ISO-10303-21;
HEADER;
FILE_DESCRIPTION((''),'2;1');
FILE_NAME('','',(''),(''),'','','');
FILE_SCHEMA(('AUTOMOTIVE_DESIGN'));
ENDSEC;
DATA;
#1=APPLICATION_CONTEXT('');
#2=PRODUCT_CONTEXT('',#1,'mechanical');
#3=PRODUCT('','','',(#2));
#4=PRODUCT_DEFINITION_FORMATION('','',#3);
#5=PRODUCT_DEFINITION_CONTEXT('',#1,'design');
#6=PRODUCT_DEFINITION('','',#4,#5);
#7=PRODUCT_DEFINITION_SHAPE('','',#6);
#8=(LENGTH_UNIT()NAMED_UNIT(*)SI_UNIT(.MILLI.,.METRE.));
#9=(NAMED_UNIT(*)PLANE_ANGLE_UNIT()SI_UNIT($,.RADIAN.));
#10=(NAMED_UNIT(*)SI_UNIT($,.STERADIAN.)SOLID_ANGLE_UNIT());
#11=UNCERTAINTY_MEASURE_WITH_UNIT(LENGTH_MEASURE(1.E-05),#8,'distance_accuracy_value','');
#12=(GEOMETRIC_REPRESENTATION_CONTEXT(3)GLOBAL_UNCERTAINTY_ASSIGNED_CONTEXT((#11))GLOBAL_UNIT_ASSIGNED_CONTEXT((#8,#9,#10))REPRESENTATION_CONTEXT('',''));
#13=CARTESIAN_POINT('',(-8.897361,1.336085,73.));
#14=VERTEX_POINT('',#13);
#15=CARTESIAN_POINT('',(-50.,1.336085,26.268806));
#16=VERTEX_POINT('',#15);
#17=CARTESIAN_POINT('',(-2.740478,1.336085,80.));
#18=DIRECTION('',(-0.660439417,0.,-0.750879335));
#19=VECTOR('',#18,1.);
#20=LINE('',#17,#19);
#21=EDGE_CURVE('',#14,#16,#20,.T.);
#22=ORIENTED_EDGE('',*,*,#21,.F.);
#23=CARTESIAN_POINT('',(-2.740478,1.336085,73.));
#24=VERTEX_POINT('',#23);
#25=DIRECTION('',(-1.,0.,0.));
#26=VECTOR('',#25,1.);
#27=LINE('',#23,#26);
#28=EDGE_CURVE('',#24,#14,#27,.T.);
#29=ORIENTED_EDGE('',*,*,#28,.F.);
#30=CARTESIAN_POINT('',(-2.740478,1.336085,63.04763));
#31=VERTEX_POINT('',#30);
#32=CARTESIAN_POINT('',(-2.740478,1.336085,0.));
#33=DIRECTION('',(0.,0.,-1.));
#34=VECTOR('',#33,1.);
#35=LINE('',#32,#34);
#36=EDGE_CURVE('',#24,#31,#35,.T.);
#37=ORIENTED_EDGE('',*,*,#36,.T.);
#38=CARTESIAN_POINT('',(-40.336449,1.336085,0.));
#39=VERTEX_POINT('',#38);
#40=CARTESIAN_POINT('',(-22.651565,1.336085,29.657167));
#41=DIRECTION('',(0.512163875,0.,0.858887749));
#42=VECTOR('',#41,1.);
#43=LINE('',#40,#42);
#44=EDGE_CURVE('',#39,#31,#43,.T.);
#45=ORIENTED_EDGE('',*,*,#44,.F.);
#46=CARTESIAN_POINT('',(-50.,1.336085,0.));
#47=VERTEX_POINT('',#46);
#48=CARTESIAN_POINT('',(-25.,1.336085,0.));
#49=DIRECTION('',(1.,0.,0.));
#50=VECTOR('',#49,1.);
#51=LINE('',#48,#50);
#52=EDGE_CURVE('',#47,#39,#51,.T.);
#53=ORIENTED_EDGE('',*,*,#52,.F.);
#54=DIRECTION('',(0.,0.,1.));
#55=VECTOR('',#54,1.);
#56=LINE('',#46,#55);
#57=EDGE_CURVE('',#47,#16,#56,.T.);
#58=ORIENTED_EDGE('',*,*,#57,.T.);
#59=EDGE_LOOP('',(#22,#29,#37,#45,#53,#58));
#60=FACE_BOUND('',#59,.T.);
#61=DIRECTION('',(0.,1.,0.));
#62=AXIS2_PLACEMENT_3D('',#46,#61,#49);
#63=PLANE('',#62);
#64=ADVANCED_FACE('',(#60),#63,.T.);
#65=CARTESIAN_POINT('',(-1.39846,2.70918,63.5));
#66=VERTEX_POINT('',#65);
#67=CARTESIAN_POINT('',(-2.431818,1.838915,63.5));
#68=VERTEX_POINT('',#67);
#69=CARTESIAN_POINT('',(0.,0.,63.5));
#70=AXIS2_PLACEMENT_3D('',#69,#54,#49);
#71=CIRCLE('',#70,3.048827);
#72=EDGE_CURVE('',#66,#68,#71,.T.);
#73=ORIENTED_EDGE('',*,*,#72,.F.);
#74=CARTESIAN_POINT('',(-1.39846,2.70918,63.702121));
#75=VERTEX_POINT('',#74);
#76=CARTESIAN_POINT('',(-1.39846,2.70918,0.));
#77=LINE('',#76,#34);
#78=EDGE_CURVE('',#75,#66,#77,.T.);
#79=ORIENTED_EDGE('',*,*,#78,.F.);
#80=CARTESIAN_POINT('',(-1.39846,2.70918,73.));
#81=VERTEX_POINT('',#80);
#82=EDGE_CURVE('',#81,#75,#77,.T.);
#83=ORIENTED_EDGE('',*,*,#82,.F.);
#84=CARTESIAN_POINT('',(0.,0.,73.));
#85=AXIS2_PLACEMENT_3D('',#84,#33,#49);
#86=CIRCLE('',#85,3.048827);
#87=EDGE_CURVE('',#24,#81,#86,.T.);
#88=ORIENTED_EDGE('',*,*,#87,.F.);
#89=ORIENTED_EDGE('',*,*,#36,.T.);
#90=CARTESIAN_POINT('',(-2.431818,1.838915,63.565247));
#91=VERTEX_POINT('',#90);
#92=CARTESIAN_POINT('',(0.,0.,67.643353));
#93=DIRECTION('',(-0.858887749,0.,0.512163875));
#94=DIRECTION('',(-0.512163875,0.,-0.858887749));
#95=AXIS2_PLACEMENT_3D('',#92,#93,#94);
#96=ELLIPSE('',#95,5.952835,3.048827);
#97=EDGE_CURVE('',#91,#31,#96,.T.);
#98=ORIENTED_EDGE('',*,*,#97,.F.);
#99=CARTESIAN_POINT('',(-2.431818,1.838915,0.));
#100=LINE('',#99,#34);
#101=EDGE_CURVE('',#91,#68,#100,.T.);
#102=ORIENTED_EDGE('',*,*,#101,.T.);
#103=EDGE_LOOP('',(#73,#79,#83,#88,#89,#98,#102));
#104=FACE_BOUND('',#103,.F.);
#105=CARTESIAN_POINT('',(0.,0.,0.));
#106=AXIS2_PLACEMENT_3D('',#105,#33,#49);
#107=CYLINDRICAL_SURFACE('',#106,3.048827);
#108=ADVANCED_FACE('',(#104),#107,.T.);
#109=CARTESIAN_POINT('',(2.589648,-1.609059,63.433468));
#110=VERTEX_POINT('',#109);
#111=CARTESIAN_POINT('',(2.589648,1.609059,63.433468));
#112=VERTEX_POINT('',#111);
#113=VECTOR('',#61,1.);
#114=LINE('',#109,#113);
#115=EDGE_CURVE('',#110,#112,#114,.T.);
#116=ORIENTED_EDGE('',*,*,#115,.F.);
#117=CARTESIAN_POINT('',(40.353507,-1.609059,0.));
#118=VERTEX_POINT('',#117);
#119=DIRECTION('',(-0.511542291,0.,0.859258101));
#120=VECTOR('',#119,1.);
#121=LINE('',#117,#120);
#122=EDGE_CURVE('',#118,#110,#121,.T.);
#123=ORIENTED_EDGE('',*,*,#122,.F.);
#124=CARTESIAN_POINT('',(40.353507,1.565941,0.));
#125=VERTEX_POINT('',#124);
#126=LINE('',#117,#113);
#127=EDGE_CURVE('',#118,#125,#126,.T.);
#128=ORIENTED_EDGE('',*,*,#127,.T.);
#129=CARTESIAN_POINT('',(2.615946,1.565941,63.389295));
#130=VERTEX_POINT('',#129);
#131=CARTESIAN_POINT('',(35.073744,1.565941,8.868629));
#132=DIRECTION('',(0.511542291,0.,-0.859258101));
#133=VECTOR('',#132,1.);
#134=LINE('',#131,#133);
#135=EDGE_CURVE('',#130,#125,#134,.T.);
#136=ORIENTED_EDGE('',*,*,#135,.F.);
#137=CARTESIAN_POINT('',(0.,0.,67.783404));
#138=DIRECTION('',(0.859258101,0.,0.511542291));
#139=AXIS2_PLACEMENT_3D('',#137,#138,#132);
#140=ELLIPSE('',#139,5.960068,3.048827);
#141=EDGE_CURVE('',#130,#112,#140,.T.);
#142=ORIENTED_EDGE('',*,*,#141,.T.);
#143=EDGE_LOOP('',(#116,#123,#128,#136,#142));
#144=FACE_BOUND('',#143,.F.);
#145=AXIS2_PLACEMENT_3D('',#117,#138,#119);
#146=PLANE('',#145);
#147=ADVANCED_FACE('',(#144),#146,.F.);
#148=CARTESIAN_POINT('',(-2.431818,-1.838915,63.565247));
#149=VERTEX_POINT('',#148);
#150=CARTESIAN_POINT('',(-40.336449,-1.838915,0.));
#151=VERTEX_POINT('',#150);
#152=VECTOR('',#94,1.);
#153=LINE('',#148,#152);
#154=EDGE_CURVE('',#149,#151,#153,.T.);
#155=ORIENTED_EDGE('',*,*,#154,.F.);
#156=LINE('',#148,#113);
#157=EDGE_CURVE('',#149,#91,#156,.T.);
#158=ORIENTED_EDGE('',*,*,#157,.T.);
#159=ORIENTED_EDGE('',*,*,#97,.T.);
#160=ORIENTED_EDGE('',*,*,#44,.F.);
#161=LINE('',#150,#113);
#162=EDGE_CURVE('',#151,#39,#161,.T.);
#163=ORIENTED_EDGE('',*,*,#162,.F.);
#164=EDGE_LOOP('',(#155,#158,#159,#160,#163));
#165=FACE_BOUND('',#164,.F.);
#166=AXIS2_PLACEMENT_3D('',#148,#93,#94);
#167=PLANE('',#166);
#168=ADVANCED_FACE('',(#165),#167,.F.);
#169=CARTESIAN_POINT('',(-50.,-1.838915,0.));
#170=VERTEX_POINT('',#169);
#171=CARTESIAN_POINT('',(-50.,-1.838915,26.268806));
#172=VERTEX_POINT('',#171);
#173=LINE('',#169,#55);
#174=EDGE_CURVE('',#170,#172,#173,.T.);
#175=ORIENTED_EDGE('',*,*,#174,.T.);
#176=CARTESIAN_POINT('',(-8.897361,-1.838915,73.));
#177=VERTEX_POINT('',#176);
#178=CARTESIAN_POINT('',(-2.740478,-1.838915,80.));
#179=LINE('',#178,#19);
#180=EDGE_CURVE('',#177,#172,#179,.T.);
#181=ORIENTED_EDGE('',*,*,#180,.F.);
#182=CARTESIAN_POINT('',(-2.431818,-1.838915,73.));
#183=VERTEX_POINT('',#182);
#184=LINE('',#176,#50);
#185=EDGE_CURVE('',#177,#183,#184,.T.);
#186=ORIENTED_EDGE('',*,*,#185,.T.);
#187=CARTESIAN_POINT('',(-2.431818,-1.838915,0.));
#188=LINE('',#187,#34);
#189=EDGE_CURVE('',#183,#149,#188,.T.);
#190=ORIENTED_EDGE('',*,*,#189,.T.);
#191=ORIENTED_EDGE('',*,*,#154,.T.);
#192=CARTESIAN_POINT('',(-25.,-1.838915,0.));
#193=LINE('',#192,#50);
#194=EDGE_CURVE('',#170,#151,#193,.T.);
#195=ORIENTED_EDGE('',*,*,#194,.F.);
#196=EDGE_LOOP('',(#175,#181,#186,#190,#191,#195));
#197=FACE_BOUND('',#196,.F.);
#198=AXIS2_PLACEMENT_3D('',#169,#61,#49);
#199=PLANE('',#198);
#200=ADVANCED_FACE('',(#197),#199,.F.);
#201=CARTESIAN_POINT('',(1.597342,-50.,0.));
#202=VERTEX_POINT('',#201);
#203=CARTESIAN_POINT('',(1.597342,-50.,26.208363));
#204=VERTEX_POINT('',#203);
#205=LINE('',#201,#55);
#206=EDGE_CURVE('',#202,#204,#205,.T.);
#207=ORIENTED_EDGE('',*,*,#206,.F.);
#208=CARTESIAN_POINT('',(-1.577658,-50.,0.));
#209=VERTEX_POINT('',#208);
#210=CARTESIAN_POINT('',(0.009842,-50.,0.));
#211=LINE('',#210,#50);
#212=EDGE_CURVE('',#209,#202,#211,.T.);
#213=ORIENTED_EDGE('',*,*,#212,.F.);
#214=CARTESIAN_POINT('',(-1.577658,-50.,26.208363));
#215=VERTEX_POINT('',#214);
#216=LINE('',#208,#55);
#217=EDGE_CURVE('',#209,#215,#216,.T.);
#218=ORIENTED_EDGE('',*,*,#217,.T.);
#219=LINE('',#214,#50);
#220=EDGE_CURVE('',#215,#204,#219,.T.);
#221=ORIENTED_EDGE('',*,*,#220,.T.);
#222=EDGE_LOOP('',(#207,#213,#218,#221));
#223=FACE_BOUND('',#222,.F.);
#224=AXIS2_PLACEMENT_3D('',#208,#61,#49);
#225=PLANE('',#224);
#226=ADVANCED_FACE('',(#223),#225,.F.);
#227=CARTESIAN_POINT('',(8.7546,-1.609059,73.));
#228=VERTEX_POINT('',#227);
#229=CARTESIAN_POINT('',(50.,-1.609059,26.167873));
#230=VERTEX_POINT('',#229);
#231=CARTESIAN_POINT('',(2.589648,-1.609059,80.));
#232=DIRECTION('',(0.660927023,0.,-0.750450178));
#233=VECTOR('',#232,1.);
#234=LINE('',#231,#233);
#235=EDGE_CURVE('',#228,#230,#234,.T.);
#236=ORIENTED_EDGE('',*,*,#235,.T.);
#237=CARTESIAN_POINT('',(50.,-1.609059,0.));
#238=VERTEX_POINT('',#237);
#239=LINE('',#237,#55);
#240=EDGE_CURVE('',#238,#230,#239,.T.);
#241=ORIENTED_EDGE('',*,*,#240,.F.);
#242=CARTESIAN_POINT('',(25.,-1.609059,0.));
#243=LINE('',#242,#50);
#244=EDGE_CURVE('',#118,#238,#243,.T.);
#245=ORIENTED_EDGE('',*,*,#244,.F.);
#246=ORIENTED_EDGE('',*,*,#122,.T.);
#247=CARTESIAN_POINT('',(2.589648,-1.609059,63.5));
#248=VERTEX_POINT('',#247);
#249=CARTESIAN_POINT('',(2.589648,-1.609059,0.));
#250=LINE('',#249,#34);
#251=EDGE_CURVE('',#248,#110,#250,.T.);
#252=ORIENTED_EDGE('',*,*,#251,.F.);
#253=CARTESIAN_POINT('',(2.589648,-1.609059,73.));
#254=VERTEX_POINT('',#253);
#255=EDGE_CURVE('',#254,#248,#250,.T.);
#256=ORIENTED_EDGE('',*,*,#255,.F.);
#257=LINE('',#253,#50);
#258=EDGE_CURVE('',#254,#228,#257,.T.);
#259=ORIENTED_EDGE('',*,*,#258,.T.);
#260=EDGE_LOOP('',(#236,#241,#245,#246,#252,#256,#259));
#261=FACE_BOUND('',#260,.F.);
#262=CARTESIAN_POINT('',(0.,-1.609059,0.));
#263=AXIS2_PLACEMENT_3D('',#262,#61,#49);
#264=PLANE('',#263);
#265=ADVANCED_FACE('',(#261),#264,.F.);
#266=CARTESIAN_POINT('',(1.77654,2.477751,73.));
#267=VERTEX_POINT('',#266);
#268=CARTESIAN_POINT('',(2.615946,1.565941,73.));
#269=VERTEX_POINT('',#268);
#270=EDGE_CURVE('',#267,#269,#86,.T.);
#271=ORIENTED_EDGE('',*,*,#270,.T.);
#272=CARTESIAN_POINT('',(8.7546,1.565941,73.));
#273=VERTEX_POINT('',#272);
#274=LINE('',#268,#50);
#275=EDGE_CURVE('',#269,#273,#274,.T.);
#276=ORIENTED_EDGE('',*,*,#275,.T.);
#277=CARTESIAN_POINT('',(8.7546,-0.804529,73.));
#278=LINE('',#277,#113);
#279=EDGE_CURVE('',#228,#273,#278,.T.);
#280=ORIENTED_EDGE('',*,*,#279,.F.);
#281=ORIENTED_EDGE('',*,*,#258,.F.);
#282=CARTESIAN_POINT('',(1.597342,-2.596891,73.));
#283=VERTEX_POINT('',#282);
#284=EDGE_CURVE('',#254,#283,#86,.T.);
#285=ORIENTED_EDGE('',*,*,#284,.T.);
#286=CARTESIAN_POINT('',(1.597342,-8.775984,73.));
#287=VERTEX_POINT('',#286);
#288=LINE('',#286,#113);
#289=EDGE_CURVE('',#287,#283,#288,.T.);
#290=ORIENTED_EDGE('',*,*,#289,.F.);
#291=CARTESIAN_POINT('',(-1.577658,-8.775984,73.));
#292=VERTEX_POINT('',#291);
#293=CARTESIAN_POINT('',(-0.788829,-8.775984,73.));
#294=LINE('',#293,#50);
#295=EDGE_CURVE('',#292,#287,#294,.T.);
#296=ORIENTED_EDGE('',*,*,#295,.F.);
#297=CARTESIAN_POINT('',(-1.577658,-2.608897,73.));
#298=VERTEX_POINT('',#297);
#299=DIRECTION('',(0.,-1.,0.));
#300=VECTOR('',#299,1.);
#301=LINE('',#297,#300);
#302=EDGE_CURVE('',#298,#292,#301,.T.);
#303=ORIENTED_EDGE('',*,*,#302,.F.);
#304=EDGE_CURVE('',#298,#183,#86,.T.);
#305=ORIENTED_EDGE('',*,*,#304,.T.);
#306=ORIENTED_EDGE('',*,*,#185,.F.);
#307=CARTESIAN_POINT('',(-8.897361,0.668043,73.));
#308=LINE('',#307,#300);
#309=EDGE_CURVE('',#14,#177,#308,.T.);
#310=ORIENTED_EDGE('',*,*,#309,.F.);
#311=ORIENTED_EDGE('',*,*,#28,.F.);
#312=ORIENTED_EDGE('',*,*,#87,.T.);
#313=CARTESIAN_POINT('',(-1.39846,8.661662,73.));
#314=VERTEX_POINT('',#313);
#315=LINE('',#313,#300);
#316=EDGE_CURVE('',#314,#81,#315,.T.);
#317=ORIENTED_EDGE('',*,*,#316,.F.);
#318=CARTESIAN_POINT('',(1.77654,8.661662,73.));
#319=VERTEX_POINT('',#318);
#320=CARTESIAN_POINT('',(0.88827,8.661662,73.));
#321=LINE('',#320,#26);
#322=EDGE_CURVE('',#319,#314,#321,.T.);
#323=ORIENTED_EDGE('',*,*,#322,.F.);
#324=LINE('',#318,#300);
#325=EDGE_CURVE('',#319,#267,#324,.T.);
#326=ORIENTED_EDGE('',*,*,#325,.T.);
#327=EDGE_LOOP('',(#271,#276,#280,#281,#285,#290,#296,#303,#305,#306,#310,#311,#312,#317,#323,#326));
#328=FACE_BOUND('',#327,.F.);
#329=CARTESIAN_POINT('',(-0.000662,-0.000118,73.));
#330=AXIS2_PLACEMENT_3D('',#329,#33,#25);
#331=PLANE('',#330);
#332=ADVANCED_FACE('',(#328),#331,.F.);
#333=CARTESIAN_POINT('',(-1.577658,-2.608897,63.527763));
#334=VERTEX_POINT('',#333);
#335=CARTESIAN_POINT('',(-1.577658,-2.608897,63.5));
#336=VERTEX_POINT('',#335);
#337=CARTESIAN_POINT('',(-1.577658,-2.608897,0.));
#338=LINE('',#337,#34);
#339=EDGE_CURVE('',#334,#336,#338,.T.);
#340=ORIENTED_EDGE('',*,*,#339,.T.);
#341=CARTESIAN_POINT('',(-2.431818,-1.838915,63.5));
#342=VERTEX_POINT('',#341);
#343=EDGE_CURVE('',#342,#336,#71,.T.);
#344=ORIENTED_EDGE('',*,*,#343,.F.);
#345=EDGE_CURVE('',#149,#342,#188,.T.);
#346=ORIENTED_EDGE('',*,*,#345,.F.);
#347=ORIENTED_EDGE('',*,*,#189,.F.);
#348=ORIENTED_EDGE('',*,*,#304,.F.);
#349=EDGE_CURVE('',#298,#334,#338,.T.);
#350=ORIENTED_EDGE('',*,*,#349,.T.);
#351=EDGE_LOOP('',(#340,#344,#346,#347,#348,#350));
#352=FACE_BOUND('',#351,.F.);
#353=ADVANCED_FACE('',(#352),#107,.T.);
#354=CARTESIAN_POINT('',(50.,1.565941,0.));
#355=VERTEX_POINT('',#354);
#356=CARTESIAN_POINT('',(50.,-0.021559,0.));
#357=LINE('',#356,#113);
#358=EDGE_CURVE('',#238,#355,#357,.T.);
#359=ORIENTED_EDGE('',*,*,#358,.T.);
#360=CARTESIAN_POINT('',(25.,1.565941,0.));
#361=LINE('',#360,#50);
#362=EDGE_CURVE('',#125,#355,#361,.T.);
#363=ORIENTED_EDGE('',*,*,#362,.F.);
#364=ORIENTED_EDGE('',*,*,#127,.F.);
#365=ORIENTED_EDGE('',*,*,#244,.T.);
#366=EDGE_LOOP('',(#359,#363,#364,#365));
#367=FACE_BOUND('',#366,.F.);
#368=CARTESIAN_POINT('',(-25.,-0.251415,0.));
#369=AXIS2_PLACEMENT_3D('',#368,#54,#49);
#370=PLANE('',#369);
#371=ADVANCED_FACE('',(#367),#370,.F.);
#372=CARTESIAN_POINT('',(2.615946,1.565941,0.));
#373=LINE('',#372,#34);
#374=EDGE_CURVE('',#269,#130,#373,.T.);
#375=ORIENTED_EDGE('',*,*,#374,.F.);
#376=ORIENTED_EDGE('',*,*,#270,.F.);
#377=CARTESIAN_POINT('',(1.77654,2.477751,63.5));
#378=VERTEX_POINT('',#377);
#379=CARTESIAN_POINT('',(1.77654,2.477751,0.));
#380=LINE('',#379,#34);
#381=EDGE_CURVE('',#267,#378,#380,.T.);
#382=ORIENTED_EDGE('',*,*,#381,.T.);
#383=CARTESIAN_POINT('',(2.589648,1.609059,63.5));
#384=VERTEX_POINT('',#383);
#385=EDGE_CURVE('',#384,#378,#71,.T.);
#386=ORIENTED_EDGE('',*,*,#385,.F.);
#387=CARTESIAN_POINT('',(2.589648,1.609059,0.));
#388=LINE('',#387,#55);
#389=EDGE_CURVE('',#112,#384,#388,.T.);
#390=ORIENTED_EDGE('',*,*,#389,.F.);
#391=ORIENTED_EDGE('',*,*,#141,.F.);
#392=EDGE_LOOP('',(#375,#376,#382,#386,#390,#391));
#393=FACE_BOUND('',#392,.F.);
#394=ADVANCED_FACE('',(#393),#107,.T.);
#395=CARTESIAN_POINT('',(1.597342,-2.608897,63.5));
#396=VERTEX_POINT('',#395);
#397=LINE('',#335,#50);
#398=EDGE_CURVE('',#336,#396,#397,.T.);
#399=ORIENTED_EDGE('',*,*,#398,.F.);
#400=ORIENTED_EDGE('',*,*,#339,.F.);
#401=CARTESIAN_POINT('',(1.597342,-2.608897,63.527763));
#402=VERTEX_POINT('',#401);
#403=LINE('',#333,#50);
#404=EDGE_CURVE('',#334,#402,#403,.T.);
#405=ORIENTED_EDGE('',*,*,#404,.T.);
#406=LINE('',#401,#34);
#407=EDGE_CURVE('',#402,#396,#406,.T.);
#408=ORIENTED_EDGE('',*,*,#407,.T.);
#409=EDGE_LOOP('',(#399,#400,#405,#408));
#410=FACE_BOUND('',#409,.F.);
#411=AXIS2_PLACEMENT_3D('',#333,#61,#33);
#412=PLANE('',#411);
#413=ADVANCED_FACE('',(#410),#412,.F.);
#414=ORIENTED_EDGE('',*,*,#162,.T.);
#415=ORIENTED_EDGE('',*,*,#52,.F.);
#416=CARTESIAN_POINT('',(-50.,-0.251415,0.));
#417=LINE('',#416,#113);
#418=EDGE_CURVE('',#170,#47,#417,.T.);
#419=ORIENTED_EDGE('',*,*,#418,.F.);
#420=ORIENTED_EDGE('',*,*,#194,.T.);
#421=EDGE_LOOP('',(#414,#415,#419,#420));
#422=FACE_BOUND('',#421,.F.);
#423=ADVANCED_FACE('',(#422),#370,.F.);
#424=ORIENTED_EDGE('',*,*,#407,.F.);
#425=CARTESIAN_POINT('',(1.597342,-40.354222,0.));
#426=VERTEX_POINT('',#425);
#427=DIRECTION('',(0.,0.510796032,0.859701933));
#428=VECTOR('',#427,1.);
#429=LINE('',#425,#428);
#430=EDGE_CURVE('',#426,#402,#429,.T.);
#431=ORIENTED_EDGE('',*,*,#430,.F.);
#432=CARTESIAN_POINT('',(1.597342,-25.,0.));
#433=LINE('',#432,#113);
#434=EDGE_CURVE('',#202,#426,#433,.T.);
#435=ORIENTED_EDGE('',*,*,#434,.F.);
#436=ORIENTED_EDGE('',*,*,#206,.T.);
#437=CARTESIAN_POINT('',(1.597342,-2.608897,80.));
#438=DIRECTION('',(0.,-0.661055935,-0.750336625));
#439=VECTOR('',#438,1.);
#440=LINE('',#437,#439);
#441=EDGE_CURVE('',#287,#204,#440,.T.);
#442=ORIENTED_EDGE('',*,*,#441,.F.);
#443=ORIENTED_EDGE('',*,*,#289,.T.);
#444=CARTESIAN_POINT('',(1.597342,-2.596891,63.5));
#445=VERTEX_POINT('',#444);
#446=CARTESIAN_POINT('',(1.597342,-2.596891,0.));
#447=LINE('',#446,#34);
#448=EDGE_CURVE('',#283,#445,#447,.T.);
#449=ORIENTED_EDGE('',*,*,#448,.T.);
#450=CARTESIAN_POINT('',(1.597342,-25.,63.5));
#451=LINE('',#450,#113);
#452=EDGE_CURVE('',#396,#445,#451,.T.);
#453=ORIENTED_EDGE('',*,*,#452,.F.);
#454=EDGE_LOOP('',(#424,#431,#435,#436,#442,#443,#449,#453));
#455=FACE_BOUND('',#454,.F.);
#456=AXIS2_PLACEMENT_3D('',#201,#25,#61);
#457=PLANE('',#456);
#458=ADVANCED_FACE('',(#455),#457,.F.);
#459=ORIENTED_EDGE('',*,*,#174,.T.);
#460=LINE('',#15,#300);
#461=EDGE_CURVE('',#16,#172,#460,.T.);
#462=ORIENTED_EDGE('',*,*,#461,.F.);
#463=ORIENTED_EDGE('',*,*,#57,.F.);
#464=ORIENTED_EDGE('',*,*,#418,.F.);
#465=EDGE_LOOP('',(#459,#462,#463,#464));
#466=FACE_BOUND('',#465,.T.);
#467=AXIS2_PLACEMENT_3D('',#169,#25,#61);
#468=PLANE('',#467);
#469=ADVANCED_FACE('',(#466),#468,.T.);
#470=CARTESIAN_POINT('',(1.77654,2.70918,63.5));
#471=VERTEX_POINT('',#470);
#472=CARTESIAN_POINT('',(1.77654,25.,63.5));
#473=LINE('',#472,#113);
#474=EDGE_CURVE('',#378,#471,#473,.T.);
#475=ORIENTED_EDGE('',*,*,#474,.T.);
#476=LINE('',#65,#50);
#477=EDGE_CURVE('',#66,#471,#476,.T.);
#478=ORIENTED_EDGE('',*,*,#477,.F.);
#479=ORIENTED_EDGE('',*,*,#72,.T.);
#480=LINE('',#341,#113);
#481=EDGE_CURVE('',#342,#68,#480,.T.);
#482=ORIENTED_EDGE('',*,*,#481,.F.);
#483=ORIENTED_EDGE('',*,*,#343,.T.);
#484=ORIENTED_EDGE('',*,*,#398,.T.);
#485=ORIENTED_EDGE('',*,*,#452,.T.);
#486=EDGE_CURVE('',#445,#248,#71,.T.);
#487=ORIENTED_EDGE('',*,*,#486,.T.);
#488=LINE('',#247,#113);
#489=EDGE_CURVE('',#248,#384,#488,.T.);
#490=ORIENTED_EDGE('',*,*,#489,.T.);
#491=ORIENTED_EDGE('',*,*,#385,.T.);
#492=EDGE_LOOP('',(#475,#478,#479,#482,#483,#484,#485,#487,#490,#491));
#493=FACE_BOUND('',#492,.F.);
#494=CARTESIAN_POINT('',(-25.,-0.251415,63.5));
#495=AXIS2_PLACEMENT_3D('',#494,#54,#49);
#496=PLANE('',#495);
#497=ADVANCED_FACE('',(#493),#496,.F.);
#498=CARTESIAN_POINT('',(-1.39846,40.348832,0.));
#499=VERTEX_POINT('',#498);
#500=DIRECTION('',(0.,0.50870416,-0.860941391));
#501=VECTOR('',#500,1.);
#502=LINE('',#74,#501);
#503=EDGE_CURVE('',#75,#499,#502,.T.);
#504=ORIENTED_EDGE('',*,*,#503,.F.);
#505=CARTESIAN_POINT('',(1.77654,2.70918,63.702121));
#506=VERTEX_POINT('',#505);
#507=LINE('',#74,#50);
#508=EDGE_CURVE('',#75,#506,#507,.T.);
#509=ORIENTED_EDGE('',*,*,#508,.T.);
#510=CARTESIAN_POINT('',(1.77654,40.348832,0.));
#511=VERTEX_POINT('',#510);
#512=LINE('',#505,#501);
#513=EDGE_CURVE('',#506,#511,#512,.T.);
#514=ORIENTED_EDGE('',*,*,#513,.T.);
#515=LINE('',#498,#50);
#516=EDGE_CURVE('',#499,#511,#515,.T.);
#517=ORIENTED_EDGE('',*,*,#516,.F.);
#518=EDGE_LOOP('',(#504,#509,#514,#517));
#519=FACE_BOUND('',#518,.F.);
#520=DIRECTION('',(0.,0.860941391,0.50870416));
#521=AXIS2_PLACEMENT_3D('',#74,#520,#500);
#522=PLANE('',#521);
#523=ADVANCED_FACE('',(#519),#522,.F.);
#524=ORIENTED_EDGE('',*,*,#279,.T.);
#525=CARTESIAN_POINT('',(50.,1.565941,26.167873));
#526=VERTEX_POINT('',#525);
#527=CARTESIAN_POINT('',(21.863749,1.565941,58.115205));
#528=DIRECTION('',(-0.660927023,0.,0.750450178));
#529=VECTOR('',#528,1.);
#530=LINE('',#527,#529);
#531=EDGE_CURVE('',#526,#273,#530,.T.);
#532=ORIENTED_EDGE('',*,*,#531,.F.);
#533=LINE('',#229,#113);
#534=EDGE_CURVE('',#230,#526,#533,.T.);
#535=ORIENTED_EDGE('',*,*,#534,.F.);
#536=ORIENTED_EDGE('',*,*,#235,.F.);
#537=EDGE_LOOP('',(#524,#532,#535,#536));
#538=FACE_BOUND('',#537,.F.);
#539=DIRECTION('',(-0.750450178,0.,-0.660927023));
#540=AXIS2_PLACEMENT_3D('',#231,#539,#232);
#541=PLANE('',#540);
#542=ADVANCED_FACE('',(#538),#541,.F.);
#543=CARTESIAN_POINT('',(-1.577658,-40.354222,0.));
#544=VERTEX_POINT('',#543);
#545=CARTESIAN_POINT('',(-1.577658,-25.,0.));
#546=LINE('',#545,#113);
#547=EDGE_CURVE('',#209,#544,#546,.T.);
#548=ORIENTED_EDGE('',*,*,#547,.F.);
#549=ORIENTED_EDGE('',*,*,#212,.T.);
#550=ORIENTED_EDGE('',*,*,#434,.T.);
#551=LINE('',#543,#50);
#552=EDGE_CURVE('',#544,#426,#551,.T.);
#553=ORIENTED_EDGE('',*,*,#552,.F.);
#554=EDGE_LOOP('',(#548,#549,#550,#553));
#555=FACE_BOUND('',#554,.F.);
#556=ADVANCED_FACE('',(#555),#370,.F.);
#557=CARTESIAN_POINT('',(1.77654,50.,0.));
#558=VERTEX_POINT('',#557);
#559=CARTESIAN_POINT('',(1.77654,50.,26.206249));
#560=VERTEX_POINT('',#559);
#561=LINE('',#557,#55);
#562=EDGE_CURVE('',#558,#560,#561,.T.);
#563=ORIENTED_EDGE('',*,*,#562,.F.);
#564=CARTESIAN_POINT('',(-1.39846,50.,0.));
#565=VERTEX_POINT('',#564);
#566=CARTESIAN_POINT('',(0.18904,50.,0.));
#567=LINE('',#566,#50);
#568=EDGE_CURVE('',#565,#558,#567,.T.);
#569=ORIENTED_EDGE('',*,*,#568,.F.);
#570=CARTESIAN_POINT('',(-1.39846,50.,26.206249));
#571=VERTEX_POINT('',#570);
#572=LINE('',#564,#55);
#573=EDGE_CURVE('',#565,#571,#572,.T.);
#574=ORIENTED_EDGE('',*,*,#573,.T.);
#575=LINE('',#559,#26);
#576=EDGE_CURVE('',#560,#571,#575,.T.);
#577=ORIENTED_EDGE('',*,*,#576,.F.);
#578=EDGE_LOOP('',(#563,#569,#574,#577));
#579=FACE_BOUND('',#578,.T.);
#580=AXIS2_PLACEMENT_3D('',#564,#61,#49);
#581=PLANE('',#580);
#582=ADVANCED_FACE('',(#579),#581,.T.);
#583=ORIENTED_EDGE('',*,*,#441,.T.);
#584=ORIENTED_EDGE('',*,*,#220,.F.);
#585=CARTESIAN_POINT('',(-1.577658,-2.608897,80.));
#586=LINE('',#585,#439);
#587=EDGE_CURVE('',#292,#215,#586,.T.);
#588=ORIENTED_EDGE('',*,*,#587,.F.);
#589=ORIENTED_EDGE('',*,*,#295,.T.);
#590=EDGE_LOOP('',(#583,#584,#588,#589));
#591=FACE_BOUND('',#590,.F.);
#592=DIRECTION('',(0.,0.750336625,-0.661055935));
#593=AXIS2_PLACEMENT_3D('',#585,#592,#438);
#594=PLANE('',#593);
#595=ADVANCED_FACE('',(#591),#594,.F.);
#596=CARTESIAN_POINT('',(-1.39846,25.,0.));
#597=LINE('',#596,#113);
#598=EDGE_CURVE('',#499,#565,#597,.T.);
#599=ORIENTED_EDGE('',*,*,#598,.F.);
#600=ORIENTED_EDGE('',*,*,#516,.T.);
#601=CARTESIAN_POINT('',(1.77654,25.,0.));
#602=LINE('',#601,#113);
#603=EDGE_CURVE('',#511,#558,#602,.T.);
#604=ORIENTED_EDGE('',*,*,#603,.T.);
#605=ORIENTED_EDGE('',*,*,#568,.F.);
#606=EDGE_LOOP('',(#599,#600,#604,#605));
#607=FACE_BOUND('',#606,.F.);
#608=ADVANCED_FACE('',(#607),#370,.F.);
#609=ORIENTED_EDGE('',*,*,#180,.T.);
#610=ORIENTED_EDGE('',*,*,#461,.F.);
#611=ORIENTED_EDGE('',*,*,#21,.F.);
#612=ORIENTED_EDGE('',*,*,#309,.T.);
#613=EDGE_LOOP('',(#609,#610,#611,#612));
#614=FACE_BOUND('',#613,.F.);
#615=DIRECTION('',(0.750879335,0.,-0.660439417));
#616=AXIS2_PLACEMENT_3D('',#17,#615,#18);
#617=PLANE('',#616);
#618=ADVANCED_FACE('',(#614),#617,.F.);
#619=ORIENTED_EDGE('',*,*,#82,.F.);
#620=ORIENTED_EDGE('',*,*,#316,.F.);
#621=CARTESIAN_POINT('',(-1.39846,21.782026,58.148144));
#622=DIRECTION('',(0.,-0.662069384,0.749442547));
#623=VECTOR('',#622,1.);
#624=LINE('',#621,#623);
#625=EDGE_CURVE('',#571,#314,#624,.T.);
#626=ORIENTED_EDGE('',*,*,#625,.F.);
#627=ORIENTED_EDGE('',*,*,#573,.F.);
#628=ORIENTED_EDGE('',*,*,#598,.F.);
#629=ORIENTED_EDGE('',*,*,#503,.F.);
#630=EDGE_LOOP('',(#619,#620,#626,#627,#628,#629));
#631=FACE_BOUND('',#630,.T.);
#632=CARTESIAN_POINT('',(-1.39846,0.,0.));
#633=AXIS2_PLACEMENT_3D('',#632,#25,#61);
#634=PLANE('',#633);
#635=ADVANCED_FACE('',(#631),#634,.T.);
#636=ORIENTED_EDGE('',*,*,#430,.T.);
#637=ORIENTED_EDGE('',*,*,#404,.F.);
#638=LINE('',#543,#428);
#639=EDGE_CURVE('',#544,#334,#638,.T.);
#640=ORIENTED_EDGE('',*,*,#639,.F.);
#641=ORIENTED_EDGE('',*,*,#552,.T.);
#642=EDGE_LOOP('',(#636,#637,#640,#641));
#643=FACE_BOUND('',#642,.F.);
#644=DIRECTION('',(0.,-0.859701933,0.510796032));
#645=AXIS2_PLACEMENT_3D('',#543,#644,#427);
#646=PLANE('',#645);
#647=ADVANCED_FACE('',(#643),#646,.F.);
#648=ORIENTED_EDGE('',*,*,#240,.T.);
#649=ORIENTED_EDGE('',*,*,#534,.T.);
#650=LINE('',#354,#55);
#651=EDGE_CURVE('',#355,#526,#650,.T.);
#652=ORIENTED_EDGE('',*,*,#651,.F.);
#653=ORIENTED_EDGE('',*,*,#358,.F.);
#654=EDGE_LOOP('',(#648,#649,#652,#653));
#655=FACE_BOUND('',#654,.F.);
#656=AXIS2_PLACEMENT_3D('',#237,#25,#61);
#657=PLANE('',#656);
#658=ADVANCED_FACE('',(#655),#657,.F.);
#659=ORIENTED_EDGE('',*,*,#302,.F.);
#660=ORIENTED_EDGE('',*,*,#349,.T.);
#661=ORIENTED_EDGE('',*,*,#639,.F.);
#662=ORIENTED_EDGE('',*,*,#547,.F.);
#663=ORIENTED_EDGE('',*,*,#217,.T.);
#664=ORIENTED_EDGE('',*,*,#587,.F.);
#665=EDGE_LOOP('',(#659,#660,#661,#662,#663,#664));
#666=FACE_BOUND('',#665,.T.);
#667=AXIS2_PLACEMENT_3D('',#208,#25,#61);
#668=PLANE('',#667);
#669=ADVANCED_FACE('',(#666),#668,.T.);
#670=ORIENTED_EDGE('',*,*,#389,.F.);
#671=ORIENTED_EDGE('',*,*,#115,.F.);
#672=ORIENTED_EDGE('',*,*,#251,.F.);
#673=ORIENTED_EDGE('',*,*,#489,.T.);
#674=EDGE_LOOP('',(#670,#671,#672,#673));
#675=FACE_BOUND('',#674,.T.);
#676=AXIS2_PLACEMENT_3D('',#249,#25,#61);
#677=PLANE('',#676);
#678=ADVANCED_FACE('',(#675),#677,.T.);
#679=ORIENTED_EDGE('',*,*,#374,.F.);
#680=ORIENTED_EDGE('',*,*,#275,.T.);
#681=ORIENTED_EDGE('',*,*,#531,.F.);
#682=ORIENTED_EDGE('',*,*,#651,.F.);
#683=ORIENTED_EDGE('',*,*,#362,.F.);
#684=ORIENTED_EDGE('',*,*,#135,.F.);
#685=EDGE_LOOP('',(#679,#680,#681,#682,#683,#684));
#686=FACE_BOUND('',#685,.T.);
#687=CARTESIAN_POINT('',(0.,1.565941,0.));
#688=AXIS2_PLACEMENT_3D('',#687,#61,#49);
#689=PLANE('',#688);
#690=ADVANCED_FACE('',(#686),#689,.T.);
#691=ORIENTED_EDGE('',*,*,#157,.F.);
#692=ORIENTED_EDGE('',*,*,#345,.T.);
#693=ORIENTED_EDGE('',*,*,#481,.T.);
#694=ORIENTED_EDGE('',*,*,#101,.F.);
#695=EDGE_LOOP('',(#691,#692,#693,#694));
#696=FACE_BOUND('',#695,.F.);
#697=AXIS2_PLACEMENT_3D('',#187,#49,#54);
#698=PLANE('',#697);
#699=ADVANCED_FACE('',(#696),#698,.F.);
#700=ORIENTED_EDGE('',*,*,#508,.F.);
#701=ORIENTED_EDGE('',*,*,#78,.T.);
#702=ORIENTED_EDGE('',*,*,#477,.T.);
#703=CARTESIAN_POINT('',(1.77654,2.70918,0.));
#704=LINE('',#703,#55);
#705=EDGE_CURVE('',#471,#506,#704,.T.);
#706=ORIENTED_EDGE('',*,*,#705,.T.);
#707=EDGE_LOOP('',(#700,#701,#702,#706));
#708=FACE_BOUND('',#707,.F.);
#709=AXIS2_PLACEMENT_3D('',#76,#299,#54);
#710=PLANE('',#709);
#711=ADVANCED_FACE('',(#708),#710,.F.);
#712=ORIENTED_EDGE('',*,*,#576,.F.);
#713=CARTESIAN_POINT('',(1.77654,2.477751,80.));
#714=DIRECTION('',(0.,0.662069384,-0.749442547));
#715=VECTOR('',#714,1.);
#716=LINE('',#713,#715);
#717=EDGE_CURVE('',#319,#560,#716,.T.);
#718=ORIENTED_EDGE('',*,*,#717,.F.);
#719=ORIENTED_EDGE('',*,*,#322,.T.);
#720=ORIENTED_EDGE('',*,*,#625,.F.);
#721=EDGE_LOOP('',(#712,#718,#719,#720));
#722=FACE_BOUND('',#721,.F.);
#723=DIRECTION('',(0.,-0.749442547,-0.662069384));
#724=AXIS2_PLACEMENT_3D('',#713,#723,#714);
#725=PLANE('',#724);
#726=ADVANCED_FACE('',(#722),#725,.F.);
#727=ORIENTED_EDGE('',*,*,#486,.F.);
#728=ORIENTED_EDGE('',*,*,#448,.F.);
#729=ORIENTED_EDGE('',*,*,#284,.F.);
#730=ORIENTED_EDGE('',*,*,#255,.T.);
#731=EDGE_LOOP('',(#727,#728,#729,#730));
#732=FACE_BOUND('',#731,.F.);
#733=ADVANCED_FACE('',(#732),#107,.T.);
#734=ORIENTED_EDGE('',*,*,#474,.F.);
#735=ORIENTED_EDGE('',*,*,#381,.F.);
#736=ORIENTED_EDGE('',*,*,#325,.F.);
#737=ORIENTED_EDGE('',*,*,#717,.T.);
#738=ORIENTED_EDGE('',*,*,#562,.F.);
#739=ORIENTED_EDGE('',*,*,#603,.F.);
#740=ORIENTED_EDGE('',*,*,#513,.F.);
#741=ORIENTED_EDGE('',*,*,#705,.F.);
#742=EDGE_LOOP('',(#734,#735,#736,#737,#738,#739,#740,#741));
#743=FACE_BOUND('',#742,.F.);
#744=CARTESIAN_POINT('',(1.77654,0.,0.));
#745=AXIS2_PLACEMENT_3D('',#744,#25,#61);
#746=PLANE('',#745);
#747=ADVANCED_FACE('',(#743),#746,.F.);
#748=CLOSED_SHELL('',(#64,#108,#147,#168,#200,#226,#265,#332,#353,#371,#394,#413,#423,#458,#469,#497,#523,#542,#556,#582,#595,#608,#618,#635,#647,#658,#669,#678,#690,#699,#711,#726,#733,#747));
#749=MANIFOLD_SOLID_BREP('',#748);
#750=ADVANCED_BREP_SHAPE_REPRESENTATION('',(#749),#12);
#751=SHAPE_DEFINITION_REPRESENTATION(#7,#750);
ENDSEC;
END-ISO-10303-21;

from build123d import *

# Parameters (mm, degrees)
F0_R         = 3.0488268425
F1_DEPTH     = 110
F2_W         = 3.175
F2_H         = 50
F3_DEPTH     = 80
F5_DEPTH     = 3.175
F6_W         = 50
F6_H         = 3.175
F7_DEPTH     = 80
F9_DEPTH     = 3.2191170087
F10_W        = 3.175
F10_H        = 50
F11_DEPTH    = 80
F13_DEPTH    = 3.5540803911
F14_W        = 50
F14_H        = 3.175
F15_DEPTH    = 80
F17_DEPTH    = 3.175
F18_R        = 5.3096274698
F19_DEPTH    = 5
F21_S5_R     = 3.0488268425
F21_T6_DEPTH = 9
F22_R        = 9.4311090011
F23_DEPTH    = 42
F25_DEPTH    = 3.2191170087
F27_DEPTH    = 3.6788295158
F29_DEPTH    = 3.175
F31_DEPTH    = 3.175
F32_DEPTH    = 63.5


# Not quite as in the source:
# - a fillet or chamfer that OpenCascade refuses, or shapes differently, is made with other operations: its cross-section is extruded or revolved along the edge and cut away or added


with BuildPart() as f1:
    # F0 (on Top) → F1 (new body)
    with BuildSketch(Plane.XY):
        Circle(F0_R)
    extrude(amount=F1_DEPTH)

    # F2 (on Top) → F3 (join)
    with BuildSketch(Plane.XY):
        with Locations((0.0098423844, -25)):
            Rectangle(F2_W, F2_H)
    extrude(amount=F3_DEPTH)

    # F4 (on face) → F5 (cut, through all)
    with BuildSketch(Plane(origin=(-1.5776576156, 0, 0), x_dir=(0, -1, 0), z_dir=(-1, 0, 0))):
        Polygon((50, 80), (2.6088966181, 80), (50, 26.2083634734), align=None)
    extrude(amount=-F5_DEPTH, mode=Mode.SUBTRACT)

    # F6 (on Top) → F7 (join)
    with BuildSketch(Plane.XY):
        with Locations((25, -0.0215585044)):
            Rectangle(F6_W, F6_H)
    extrude(amount=F7_DEPTH)

    # F8 (on face) → F9 (cut, through all)
    with BuildSketch(Plane.XZ.offset(1.6090585044)):
        Polygon((50, 80), (2.5896478226, 80), (50, 26.1678732932), align=None)
    extrude(amount=-F9_DEPTH, mode=Mode.SUBTRACT)

    # F10 (on Top) → F11 (join)
    with BuildSketch(Plane.XY):
        with Locations((0.1890401955, 25)):
            Rectangle(F10_W, F10_H)
    extrude(amount=F11_DEPTH)

    # F12 (on face) → F13 (cut, through all)
    with BuildSketch(Plane.YZ.offset(1.7765401955)):
        Polygon((50, 80), (2.4777510064, 80), (50, 26.2062493712), align=None)
    extrude(amount=-F13_DEPTH, mode=Mode.SUBTRACT)

    # F14 (on Top) → F15 (join)
    with BuildSketch(Plane.XY):
        with Locations((-25, -0.2514147579)):
            Rectangle(F14_W, F14_H)
    extrude(amount=F15_DEPTH)

    # F16 (on face) → F17 (cut, through all)
    with BuildSketch(Plane(origin=(0, 1.3360852421, 0), x_dir=(-1, 0, 0), z_dir=(0, 1, 0))):
        Polygon((50, 80), (2.7404783053, 80), (50, 26.2688063085), align=None)
    extrude(amount=-F17_DEPTH, mode=Mode.SUBTRACT)

    # F18 (on face) → F19 (join)
    with BuildSketch(Plane.XY.offset(110)):
        Circle(F18_R)
    extrude(amount=F19_DEPTH)

    # F21: fillet of radius 5.08 on 1 edges, made by hand


with BuildPart() as f21_tool2:
    # F21_s3 → F21_t4 (revolve)
    with BuildSketch(Plane.XZ):
        with BuildLine():
            ThreePointArc((5.3096274698, 115.08), (3.8217299183, 111.4878975516), (0.2296274698, 110))
            Line((0.2296274698, 110), (5.3096274698, 110))
            Line((5.3096274698, 110), (5.3096274698, 115.08))
        make_face()
    revolve(axis=Axis((0, 0, 110), (0, 0, 1)))

    # F21_s5 → F21_t6 (cut, symmetric)
    with BuildSketch(Plane.XY.offset(112.5)):
        Circle(F21_S5_R)
    extrude(amount=F21_T6_DEPTH, both=True, mode=Mode.SUBTRACT)


with BuildPart() as f1_1:
    add(f1.part)

    # F21_t1: cut F21_tool2
    add(f21_tool2.part, mode=Mode.SUBTRACT)

    # F22 (on face) + F20 (on face) → F23 (cut)
    with BuildSketch(Plane.XY.offset(115)):
        Circle(F22_R)
        with BuildLine():
            add(Edge.make_bspline(
                [(5.3089975095, 0), (5.3089975164, -0.1612273834), (5.3031219673, -0.3224552101), (5.2913709183, -0.483414871), (5.2737606128, -0.6438392355), (5.250323482, -0.803462652), (5.1918928197, -1.1205792461), (5.1568991277, -1.2780732959), (5.1161757966, -1.4342389448), (5.0697872067, -1.5888164279), (5.0178133896, -1.7415503683), (4.9028866804, -2.0428291895), (4.8399334722, -2.1913748989), (4.7715861919, -2.3375759551), (4.6979552247, -2.4811885599), (4.6191655532, -2.621976066), (4.4515479732, -2.8974418959), (4.3627196038, -3.0321209774), (4.2690113246, -3.163516784), (4.1705758713, -3.2914095559), (4.0675790391, -3.4155892111), (3.8528203378, -3.6561214891), (3.741057878, -3.7724747735), (3.6250912427, -3.8847148691), (3.5051104607, -3.9926533309), (3.3813166507, -4.0961135978), (3.1836352831, -4.2494509759), (3.112252337, -4.3025577734), (3.0398087405, -4.3542238063), (2.9663409133, -4.4044227305), (2.8918861372, -4.4531294369), (2.6798136644, -4.5858529875), (2.5400273484, -4.6664055795), (2.3973513324, -4.7418353748), (2.2520206742, -4.812014427), (2.1042777659, -4.876829296), (1.7114232911, -5.0323715135), (1.4627882577, -5.1142142284), (1.2095369224, -5.1812867651), (0.9527644649, -5.2332758894), (0.6935915551, -5.2699775603), (0.2946385826, -5.302637144), (0.1557563369, -5.3096254474), (0.0166889737, -5.3122478349), (-0.1223921213, -5.3104992794), (-0.2613155342, -5.3043837311), (-0.6549222008, -5.27465023), (-0.9088254061, -5.240644445), (-1.1605447695, -5.1919788406), (-1.4090280657, -5.1288359037), (-1.6532455136, -5.0514985311), (-2.0428291895, -4.9028866804), (-2.1913748989, -4.8399334722), (-2.3375759551, -4.7715861919), (-2.4811885599, -4.6979552247), (-2.621976066, -4.6191655532), (-2.9069406851, -4.4457680805), (-3.0506829028, -4.3504435211), (-3.1906552392, -4.2495537919), (-3.326590046, -4.1432865783), (-3.4582324188, -4.0318465385), (-3.7042475112, -3.8065731668), (-3.8191871972, -3.6933574313), (-3.9299611895, -3.5759895387), (-4.0363834457, -3.4546618709), (-4.1382799458, -3.3295777493), (-4.3025292517, -3.1122435833), (-4.3673403783, -3.0218507611), (-4.4298690538, -2.9298431328), (-4.4900653265, -2.8362928914), (-4.547882312, -2.7412742583), (-4.7085243801, -2.4616834099), (-4.8050260286, -2.2734759427), (-4.8924795443, -2.0807665641), (-4.9706274286, -1.8840995099), (-5.0392562783, -1.6840377697), (-5.1431777983, -1.3263374509), (-5.1825166753, -1.1698721609), (-5.2161385309, -1.0120251768), (-5.2439844367, -0.8530575539), (-5.2660114214, -0.6932334439), (-5.2955836982, -0.4000641655), (-5.304971108, -0.2669041947), (-5.3103394555, -0.1334914954), (-5.3116811185, 2.24268e-05), (-5.3089960974, 0.1334858749), (-5.2958672734, 0.3944555075), (-5.285751401, 0.5219785014), (-5.2719511359, 0.6491822874), (-5.2544795994, 0.7759339971), (-5.2333562961, 0.902101548), (-5.1784776927, 1.1802778807), (-5.1429744448, 1.3319423487), (-5.1021441975, 1.4823099163), (-5.0560473437, 1.6311473933), (-5.0047578416, 1.7782255304), (-4.893982686, 2.0632306146), (-4.8348549375, 2.2012974034), (-4.7710584997, 2.3373174414), (-4.7026828716, 2.4710941572), (-4.6298285205, 2.6024363529), (-4.5068458905, 2.8074378588), (-4.4595511931, 2.8827974536), (-4.4107459406, 2.9571984008), (-4.3604545348, 3.030602952), (-4.3087026287, 3.1029741973), (-4.1624425572, 3.2990542656), (-4.06497732, 3.4205578416), (-3.9632659712, 3.5385930737), (-3.8574636047, 3.6529756499), (-3.7477358516, 3.7635306663), (-3.5288873954, 3.9690430432), (-3.4202827483, 4.0645508664), (-3.3085859695, 4.1564837007), (-3.1939446305, 4.2447173665), (-3.0765128434, 4.3291359014), (-2.8225364614, 4.4994151645), (-2.6853493397, 4.5843188029), (-2.5451130327, 4.6641929401), (-2.4020584638, 4.7389023095), (-2.2564243419, 4.8083259132), (-1.9655922898, 4.9341801791), (-1.8205517664, 4.9909766405), (-1.6735574413, 5.0426504529), (-1.5248356135, 5.0891190703), (-1.3746170312, 5.1303133537), (-1.0662467674, 5.2033226624), (-0.9080025448, 5.2347503609), (-0.7486656211, 5.2603988366), (-0.5884996827, 5.280222352), (-0.4277707066, 5.2941912622), (-0.1057232143, 5.3103927821), (0.0555961877, 5.3126254363), (0.216942973, 5.3089765378), (0.3780495323, 5.2994488877), (0.5386489202, 5.2840615287), (0.8583007911, 5.241637974), (1.0173541533, 5.2146016616), (1.1753686742, 5.1817762024), (1.3320816823, 5.1432128436), (1.4872341021, 5.0989786844), (1.7780444639, 5.0044886665), (1.9140592952, 4.9553289334), (2.0484309855, 4.9017372808), (2.1809796225, 4.8437832023), (2.3115293435, 4.7815458821), (2.5831002543, 4.6410173426), (2.7235922798, 4.5617019911), (2.8611458759, 4.4772916377), (2.9955312596, 4.3879234765), (3.1265274005, 4.2937483988), (3.3725308355, 4.1029285715), (3.4880183137, 4.0069016419), (3.6002132702, 3.9069830353), (3.7089527961, 3.8033145651), (3.814082259, 3.6960470264), (3.9755282507, 3.5197361179), (4.0342821646, 3.4529241838), (4.0916866566, 3.3849375827), (4.1477124989, 3.3158104634), (4.2023316243, 3.2455779348), (4.594537319, 2.7197771432), (4.8754447289, 2.2216413722), (5.09088272, 1.6895647911), (5.2363259783, 1.1342583219), (5.3089977324, 0.5670131937), (5.3089975095, 0)],
                knots=[0, 0, 0, 0, 0, 0, 0, 0.0290003201, 0.0290003201, 0.0290003201, 0.0290003201, 0.0290003201, 0.0580006403, 0.0580006403, 0.0580006403, 0.0580006403, 0.0580006403, 0.0870009604, 0.0870009604, 0.0870009604, 0.0870009604, 0.0870009604, 0.1160012805, 0.1160012805, 0.1160012805, 0.1160012805, 0.1160012805, 0.1450016007, 0.1450016007, 0.1450016007, 0.1450016007, 0.1450016007, 0.1610017773, 0.1610017773, 0.1610017773, 0.1610017773, 0.1610017773, 0.1900020974, 0.1900020974, 0.1900020974, 0.1900020974, 0.1900020974, 0.2370026164, 0.2370026164, 0.2370026164, 0.2370026164, 0.2370026164, 0.2620028924, 0.2620028924, 0.2620028924, 0.2620028924, 0.2620028924, 0.3080034003, 0.3080034003, 0.3080034003, 0.3080034003, 0.3080034003, 0.3370037204, 0.3370037204, 0.3370037204, 0.3370037204, 0.3370037204, 0.3680040627, 0.3680040627, 0.3680040627, 0.3680040627, 0.3680040627, 0.3970043828, 0.3970043828, 0.3970043828, 0.3970043828, 0.3970043828, 0.4170046036, 0.4170046036, 0.4170046036, 0.4170046036, 0.4170046036, 0.4550050231, 0.4550050231, 0.4550050231, 0.4550050231, 0.4550050231, 0.4840053432, 0.4840053432, 0.4840053432, 0.4840053432, 0.4840053432, 0.5080056082, 0.5080056082, 0.5080056082, 0.5080056082, 0.5080056082, 0.5310058621, 0.5310058621, 0.5310058621, 0.5310058621, 0.5310058621, 0.5590061711, 0.5590061711, 0.5590061711, 0.5590061711, 0.5590061711, 0.5860064692, 0.5860064692, 0.5860064692, 0.5860064692, 0.5860064692, 0.6020066458, 0.6020066458, 0.6020066458, 0.6020066458, 0.6020066458, 0.6300069549, 0.6300069549, 0.6300069549, 0.6300069549, 0.6300069549, 0.6560072419, 0.6560072419, 0.6560072419, 0.6560072419, 0.6560072419, 0.6850075621, 0.6850075621, 0.6850075621, 0.6850075621, 0.6850075621, 0.7130078712, 0.7130078712, 0.7130078712, 0.7130078712, 0.7130078712, 0.7420081913, 0.7420081913, 0.7420081913, 0.7420081913, 0.7420081913, 0.7710085114, 0.7710085114, 0.7710085114, 0.7710085114, 0.7710085114, 0.8000088316, 0.8000088316, 0.8000088316, 0.8000088316, 0.8000088316, 0.8260091186, 0.8260091186, 0.8260091186, 0.8260091186, 0.8260091186, 0.8550094387, 0.8550094387, 0.8550094387, 0.8550094387, 0.8550094387, 0.8820097368, 0.8820097368, 0.8820097368, 0.8820097368, 0.8820097368, 0.8980099134, 0.8980099134, 0.8980099134, 0.8980099134, 0.8980099134, 1, 1, 1, 1, 1, 1, 1], degree=6))
        make_face(mode=Mode.SUBTRACT)
    with BuildSketch(Plane.XY.offset(115)):
        with BuildLine():
            add(Edge.make_bspline(
                [(5.3089975095, 0), (5.3089975164, -0.1612273834), (5.3031219673, -0.3224552101), (5.2913709183, -0.483414871), (5.2737606128, -0.6438392355), (5.250323482, -0.803462652), (5.1918928197, -1.1205792461), (5.1568991277, -1.2780732959), (5.1161757966, -1.4342389448), (5.0697872067, -1.5888164279), (5.0178133896, -1.7415503683), (4.9028866804, -2.0428291895), (4.8399334722, -2.1913748989), (4.7715861919, -2.3375759551), (4.6979552247, -2.4811885599), (4.6191655532, -2.621976066), (4.4515479732, -2.8974418959), (4.3627196038, -3.0321209774), (4.2690113246, -3.163516784), (4.1705758713, -3.2914095559), (4.0675790391, -3.4155892111), (3.8528203378, -3.6561214891), (3.741057878, -3.7724747735), (3.6250912427, -3.8847148691), (3.5051104607, -3.9926533309), (3.3813166507, -4.0961135978), (3.1836352831, -4.2494509759), (3.112252337, -4.3025577734), (3.0398087405, -4.3542238063), (2.9663409133, -4.4044227305), (2.8918861372, -4.4531294369), (2.6798136644, -4.5858529875), (2.5400273484, -4.6664055795), (2.3973513324, -4.7418353748), (2.2520206742, -4.812014427), (2.1042777659, -4.876829296), (1.7114232911, -5.0323715135), (1.4627882577, -5.1142142284), (1.2095369224, -5.1812867651), (0.9527644649, -5.2332758894), (0.6935915551, -5.2699775603), (0.2946385826, -5.302637144), (0.1557563369, -5.3096254474), (0.0166889737, -5.3122478349), (-0.1223921213, -5.3104992794), (-0.2613155342, -5.3043837311), (-0.6549222008, -5.27465023), (-0.9088254061, -5.240644445), (-1.1605447695, -5.1919788406), (-1.4090280657, -5.1288359037), (-1.6532455136, -5.0514985311), (-2.0428291895, -4.9028866804), (-2.1913748989, -4.8399334722), (-2.3375759551, -4.7715861919), (-2.4811885599, -4.6979552247), (-2.621976066, -4.6191655532), (-2.9069406851, -4.4457680805), (-3.0506829028, -4.3504435211), (-3.1906552392, -4.2495537919), (-3.326590046, -4.1432865783), (-3.4582324188, -4.0318465385), (-3.7042475112, -3.8065731668), (-3.8191871972, -3.6933574313), (-3.9299611895, -3.5759895387), (-4.0363834457, -3.4546618709), (-4.1382799458, -3.3295777493), (-4.3025292517, -3.1122435833), (-4.3673403783, -3.0218507611), (-4.4298690538, -2.9298431328), (-4.4900653265, -2.8362928914), (-4.547882312, -2.7412742583), (-4.7085243801, -2.4616834099), (-4.8050260286, -2.2734759427), (-4.8924795443, -2.0807665641), (-4.9706274286, -1.8840995099), (-5.0392562783, -1.6840377697), (-5.1431777983, -1.3263374509), (-5.1825166753, -1.1698721609), (-5.2161385309, -1.0120251768), (-5.2439844367, -0.8530575539), (-5.2660114214, -0.6932334439), (-5.2955836982, -0.4000641655), (-5.304971108, -0.2669041947), (-5.3103394555, -0.1334914954), (-5.3116811185, 2.24268e-05), (-5.3089960974, 0.1334858749), (-5.2958672734, 0.3944555075), (-5.285751401, 0.5219785014), (-5.2719511359, 0.6491822874), (-5.2544795994, 0.7759339971), (-5.2333562961, 0.902101548), (-5.1784776927, 1.1802778807), (-5.1429744448, 1.3319423487), (-5.1021441975, 1.4823099163), (-5.0560473437, 1.6311473933), (-5.0047578416, 1.7782255304), (-4.893982686, 2.0632306146), (-4.8348549375, 2.2012974034), (-4.7710584997, 2.3373174414), (-4.7026828716, 2.4710941572), (-4.6298285205, 2.6024363529), (-4.5068458905, 2.8074378588), (-4.4595511931, 2.8827974536), (-4.4107459406, 2.9571984008), (-4.3604545348, 3.030602952), (-4.3087026287, 3.1029741973), (-4.1624425572, 3.2990542656), (-4.06497732, 3.4205578416), (-3.9632659712, 3.5385930737), (-3.8574636047, 3.6529756499), (-3.7477358516, 3.7635306663), (-3.5288873954, 3.9690430432), (-3.4202827483, 4.0645508664), (-3.3085859695, 4.1564837007), (-3.1939446305, 4.2447173665), (-3.0765128434, 4.3291359014), (-2.8225364614, 4.4994151645), (-2.6853493397, 4.5843188029), (-2.5451130327, 4.6641929401), (-2.4020584638, 4.7389023095), (-2.2564243419, 4.8083259132), (-1.9655922898, 4.9341801791), (-1.8205517664, 4.9909766405), (-1.6735574413, 5.0426504529), (-1.5248356135, 5.0891190703), (-1.3746170312, 5.1303133537), (-1.0662467674, 5.2033226624), (-0.9080025448, 5.2347503609), (-0.7486656211, 5.2603988366), (-0.5884996827, 5.280222352), (-0.4277707066, 5.2941912622), (-0.1057232143, 5.3103927821), (0.0555961877, 5.3126254363), (0.216942973, 5.3089765378), (0.3780495323, 5.2994488877), (0.5386489202, 5.2840615287), (0.8583007911, 5.241637974), (1.0173541533, 5.2146016616), (1.1753686742, 5.1817762024), (1.3320816823, 5.1432128436), (1.4872341021, 5.0989786844), (1.7780444639, 5.0044886665), (1.9140592952, 4.9553289334), (2.0484309855, 4.9017372808), (2.1809796225, 4.8437832023), (2.3115293435, 4.7815458821), (2.5831002543, 4.6410173426), (2.7235922798, 4.5617019911), (2.8611458759, 4.4772916377), (2.9955312596, 4.3879234765), (3.1265274005, 4.2937483988), (3.3725308355, 4.1029285715), (3.4880183137, 4.0069016419), (3.6002132702, 3.9069830353), (3.7089527961, 3.8033145651), (3.814082259, 3.6960470264), (3.9755282507, 3.5197361179), (4.0342821646, 3.4529241838), (4.0916866566, 3.3849375827), (4.1477124989, 3.3158104634), (4.2023316243, 3.2455779348), (4.594537319, 2.7197771432), (4.8754447289, 2.2216413722), (5.09088272, 1.6895647911), (5.2363259783, 1.1342583219), (5.3089977324, 0.5670131937), (5.3089975095, 0)],
                knots=[0, 0, 0, 0, 0, 0, 0, 0.0290003201, 0.0290003201, 0.0290003201, 0.0290003201, 0.0290003201, 0.0580006403, 0.0580006403, 0.0580006403, 0.0580006403, 0.0580006403, 0.0870009604, 0.0870009604, 0.0870009604, 0.0870009604, 0.0870009604, 0.1160012805, 0.1160012805, 0.1160012805, 0.1160012805, 0.1160012805, 0.1450016007, 0.1450016007, 0.1450016007, 0.1450016007, 0.1450016007, 0.1610017773, 0.1610017773, 0.1610017773, 0.1610017773, 0.1610017773, 0.1900020974, 0.1900020974, 0.1900020974, 0.1900020974, 0.1900020974, 0.2370026164, 0.2370026164, 0.2370026164, 0.2370026164, 0.2370026164, 0.2620028924, 0.2620028924, 0.2620028924, 0.2620028924, 0.2620028924, 0.3080034003, 0.3080034003, 0.3080034003, 0.3080034003, 0.3080034003, 0.3370037204, 0.3370037204, 0.3370037204, 0.3370037204, 0.3370037204, 0.3680040627, 0.3680040627, 0.3680040627, 0.3680040627, 0.3680040627, 0.3970043828, 0.3970043828, 0.3970043828, 0.3970043828, 0.3970043828, 0.4170046036, 0.4170046036, 0.4170046036, 0.4170046036, 0.4170046036, 0.4550050231, 0.4550050231, 0.4550050231, 0.4550050231, 0.4550050231, 0.4840053432, 0.4840053432, 0.4840053432, 0.4840053432, 0.4840053432, 0.5080056082, 0.5080056082, 0.5080056082, 0.5080056082, 0.5080056082, 0.5310058621, 0.5310058621, 0.5310058621, 0.5310058621, 0.5310058621, 0.5590061711, 0.5590061711, 0.5590061711, 0.5590061711, 0.5590061711, 0.5860064692, 0.5860064692, 0.5860064692, 0.5860064692, 0.5860064692, 0.6020066458, 0.6020066458, 0.6020066458, 0.6020066458, 0.6020066458, 0.6300069549, 0.6300069549, 0.6300069549, 0.6300069549, 0.6300069549, 0.6560072419, 0.6560072419, 0.6560072419, 0.6560072419, 0.6560072419, 0.6850075621, 0.6850075621, 0.6850075621, 0.6850075621, 0.6850075621, 0.7130078712, 0.7130078712, 0.7130078712, 0.7130078712, 0.7130078712, 0.7420081913, 0.7420081913, 0.7420081913, 0.7420081913, 0.7420081913, 0.7710085114, 0.7710085114, 0.7710085114, 0.7710085114, 0.7710085114, 0.8000088316, 0.8000088316, 0.8000088316, 0.8000088316, 0.8000088316, 0.8260091186, 0.8260091186, 0.8260091186, 0.8260091186, 0.8260091186, 0.8550094387, 0.8550094387, 0.8550094387, 0.8550094387, 0.8550094387, 0.8820097368, 0.8820097368, 0.8820097368, 0.8820097368, 0.8820097368, 0.8980099134, 0.8980099134, 0.8980099134, 0.8980099134, 0.8980099134, 1, 1, 1, 1, 1, 1, 1], degree=6))
        make_face()
    extrude(amount=-F23_DEPTH, mode=Mode.SUBTRACT)

    # F24 (on face) → F25 (cut, through all)
    with BuildSketch(Plane.XZ.offset(1.6090585044)):
        Polygon((2.5896478226, 51.2986071408), (2.5896478226, 0), (40.3535068035, 0), (2.5896478226, 63.4334683418), align=None)
    extrude(amount=-F25_DEPTH, mode=Mode.SUBTRACT)

    # F26 (on face) → F27 (cut, through all)
    with BuildSketch(Plane.XZ.offset(1.8389147579)):
        Polygon((-2.4318177623, 63.5652467608), (-40.3364486992, 0), (-2.4318177623, 0), align=None)
    extrude(amount=-F27_DEPTH, mode=Mode.SUBTRACT)

    # F28 (on face) → F29 (cut, through all)
    with BuildSketch(Plane(origin=(-1.5776576156, 0, 0), x_dir=(0, -1, 0), z_dir=(-1, 0, 0))):
        Polygon((2.6088966181, 0), (40.3542220592, 0), (2.6088966181, 63.5277628899), align=None)
    extrude(amount=-F29_DEPTH, mode=Mode.SUBTRACT)

    # F30 (on face) → F31 (cut, through all)
    with BuildSketch(Plane(origin=(-1.3984598045, 0, 0), x_dir=(0, -1, 0), z_dir=(-1, 0, 0))):
        Polygon((-2.7091798189, 63.702121377), (-40.3488315642, 0), (-2.7091798189, 0), align=None)
    extrude(amount=-F31_DEPTH, mode=Mode.SUBTRACT)

    # F32 (cut): a face of the model
    f32_faces = [f1_1.faces().sort_by_distance(p)[0] for p in [
        (0.0572129055, 0.0359617419, 0),
    ]]
    extrude(f32_faces, amount=-F32_DEPTH, mode=Mode.SUBTRACT)


solid = f1_1.part
